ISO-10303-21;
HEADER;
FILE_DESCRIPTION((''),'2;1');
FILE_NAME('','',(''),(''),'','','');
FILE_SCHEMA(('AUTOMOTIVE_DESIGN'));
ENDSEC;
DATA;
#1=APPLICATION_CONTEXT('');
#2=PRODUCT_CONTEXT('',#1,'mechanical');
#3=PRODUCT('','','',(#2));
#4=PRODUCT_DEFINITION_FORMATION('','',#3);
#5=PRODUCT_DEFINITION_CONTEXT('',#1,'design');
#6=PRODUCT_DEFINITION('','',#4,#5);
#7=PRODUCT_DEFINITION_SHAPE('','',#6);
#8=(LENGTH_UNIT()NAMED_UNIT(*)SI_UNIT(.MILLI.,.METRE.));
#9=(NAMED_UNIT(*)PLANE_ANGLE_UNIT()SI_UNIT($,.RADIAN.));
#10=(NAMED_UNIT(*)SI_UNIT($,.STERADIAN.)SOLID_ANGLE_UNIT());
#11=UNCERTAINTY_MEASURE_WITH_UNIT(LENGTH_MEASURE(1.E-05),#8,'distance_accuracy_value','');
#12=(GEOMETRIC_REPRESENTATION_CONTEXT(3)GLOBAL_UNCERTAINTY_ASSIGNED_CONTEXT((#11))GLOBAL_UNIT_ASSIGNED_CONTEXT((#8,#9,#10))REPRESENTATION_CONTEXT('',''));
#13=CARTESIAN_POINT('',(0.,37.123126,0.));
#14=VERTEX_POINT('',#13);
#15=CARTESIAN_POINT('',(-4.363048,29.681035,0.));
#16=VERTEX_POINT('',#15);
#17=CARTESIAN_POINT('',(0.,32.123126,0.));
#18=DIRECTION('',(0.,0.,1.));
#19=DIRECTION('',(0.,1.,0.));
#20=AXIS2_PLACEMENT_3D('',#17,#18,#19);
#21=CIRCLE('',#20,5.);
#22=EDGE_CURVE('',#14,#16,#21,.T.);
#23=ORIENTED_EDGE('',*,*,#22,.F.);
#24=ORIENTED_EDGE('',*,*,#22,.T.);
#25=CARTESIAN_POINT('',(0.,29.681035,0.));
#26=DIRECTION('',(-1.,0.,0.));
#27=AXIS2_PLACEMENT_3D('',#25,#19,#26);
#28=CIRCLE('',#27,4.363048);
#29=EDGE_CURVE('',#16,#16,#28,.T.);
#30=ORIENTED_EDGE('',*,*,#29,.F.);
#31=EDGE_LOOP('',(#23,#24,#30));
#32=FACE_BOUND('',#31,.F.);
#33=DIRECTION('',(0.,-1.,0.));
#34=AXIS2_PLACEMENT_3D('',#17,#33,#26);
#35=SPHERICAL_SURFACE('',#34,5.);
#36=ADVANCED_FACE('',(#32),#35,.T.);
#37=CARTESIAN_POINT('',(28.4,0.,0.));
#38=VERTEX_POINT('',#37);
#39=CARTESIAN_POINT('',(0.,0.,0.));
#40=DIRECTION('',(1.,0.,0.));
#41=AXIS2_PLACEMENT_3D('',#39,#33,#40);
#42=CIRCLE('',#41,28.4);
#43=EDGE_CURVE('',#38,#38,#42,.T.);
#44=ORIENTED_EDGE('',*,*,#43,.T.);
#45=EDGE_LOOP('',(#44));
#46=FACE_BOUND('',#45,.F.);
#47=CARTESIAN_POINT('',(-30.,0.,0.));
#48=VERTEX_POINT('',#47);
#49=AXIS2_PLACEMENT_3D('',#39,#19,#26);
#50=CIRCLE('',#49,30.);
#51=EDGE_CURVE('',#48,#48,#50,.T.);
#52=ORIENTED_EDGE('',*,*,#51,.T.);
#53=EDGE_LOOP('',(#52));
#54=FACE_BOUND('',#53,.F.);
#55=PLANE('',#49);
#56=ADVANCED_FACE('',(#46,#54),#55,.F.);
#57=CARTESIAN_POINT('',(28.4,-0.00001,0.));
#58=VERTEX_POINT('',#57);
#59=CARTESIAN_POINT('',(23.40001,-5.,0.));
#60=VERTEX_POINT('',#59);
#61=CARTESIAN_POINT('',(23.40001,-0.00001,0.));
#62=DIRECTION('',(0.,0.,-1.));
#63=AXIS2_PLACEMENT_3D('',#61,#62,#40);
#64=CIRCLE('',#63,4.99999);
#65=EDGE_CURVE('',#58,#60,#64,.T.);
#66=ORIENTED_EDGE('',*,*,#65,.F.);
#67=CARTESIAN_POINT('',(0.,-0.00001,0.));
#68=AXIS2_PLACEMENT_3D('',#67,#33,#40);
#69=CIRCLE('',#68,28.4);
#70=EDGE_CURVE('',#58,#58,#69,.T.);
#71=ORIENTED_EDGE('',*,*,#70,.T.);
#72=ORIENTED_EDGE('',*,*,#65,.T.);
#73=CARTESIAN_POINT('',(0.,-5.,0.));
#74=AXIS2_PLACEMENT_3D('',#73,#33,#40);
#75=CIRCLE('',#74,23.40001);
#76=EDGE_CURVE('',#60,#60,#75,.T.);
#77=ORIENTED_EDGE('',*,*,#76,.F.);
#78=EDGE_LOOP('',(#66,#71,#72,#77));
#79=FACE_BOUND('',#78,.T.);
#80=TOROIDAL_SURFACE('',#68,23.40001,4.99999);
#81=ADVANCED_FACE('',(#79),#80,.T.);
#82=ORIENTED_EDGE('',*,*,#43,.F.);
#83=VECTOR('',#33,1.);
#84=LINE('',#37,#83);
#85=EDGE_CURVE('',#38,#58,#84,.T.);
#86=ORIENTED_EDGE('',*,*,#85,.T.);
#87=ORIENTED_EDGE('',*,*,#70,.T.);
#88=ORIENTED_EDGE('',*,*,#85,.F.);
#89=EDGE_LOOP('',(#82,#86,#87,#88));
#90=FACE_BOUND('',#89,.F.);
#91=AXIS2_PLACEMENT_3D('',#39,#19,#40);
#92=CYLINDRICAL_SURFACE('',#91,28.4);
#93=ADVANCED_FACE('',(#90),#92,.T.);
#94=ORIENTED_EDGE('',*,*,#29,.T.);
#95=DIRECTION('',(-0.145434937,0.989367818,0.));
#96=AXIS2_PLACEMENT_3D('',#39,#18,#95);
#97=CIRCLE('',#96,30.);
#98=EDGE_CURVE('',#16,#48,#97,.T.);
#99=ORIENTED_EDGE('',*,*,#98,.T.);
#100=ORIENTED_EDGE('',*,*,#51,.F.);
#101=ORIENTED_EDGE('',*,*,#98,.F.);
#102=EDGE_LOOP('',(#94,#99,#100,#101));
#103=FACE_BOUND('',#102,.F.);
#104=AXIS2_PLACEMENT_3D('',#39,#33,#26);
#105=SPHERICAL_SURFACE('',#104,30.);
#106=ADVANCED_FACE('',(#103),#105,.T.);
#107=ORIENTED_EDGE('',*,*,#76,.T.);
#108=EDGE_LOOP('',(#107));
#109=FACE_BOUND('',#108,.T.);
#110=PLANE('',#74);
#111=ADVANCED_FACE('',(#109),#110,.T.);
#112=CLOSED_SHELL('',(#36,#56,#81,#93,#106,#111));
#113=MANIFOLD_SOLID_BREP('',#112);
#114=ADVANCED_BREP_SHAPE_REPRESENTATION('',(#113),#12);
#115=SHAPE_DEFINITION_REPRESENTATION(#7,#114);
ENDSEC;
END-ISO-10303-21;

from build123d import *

# Parameters (mm, degrees)
F2_R     = 28.4
F3_DEPTH = 5
F4_R     = 4.99999


# Not quite as in the source:
# - a fillet or chamfer is up to 0.001 mm smaller than in the source, because OpenCascade refuses the exact size


with BuildPart() as f1:
    # F0 (on Top) → F1 (revolve)
    with BuildSketch(Plane.XY):
        with BuildLine():
            ThreePointArc((0, 37.1231260896), (-4.3133778971, 34.6519145578), (-4.3630481141, 29.6810345364))
            ThreePointArc((-4.3630481141, 29.6810345364), (-22.7034297346, 19.6100555402), (-30, 0))
            Line((-30, 0), (0, 0))
            Line((0, 0), (0, 27.1231260896))
            Line((0, 27.1231260896), (0, 30))
            Line((0, 30), (0, 37.1231260896))
        make_face()
    revolve(axis=Axis((0, 15, 0), (0, 1, 0)))

    # F2 (on Front) → F3 (join)
    with BuildSketch(Plane.XZ):
        Circle(F2_R)
    extrude(amount=F3_DEPTH)

    # F4 (radius 5 in the source; OpenCascade refuses exactly that, so slightly less here)
    f4_edges = [f1.edges().sort_by_distance(p)[0] for p in [
        (-28.4, -5, 0),
    ]]
    fillet(f4_edges, radius=F4_R)


solid = f1.part
